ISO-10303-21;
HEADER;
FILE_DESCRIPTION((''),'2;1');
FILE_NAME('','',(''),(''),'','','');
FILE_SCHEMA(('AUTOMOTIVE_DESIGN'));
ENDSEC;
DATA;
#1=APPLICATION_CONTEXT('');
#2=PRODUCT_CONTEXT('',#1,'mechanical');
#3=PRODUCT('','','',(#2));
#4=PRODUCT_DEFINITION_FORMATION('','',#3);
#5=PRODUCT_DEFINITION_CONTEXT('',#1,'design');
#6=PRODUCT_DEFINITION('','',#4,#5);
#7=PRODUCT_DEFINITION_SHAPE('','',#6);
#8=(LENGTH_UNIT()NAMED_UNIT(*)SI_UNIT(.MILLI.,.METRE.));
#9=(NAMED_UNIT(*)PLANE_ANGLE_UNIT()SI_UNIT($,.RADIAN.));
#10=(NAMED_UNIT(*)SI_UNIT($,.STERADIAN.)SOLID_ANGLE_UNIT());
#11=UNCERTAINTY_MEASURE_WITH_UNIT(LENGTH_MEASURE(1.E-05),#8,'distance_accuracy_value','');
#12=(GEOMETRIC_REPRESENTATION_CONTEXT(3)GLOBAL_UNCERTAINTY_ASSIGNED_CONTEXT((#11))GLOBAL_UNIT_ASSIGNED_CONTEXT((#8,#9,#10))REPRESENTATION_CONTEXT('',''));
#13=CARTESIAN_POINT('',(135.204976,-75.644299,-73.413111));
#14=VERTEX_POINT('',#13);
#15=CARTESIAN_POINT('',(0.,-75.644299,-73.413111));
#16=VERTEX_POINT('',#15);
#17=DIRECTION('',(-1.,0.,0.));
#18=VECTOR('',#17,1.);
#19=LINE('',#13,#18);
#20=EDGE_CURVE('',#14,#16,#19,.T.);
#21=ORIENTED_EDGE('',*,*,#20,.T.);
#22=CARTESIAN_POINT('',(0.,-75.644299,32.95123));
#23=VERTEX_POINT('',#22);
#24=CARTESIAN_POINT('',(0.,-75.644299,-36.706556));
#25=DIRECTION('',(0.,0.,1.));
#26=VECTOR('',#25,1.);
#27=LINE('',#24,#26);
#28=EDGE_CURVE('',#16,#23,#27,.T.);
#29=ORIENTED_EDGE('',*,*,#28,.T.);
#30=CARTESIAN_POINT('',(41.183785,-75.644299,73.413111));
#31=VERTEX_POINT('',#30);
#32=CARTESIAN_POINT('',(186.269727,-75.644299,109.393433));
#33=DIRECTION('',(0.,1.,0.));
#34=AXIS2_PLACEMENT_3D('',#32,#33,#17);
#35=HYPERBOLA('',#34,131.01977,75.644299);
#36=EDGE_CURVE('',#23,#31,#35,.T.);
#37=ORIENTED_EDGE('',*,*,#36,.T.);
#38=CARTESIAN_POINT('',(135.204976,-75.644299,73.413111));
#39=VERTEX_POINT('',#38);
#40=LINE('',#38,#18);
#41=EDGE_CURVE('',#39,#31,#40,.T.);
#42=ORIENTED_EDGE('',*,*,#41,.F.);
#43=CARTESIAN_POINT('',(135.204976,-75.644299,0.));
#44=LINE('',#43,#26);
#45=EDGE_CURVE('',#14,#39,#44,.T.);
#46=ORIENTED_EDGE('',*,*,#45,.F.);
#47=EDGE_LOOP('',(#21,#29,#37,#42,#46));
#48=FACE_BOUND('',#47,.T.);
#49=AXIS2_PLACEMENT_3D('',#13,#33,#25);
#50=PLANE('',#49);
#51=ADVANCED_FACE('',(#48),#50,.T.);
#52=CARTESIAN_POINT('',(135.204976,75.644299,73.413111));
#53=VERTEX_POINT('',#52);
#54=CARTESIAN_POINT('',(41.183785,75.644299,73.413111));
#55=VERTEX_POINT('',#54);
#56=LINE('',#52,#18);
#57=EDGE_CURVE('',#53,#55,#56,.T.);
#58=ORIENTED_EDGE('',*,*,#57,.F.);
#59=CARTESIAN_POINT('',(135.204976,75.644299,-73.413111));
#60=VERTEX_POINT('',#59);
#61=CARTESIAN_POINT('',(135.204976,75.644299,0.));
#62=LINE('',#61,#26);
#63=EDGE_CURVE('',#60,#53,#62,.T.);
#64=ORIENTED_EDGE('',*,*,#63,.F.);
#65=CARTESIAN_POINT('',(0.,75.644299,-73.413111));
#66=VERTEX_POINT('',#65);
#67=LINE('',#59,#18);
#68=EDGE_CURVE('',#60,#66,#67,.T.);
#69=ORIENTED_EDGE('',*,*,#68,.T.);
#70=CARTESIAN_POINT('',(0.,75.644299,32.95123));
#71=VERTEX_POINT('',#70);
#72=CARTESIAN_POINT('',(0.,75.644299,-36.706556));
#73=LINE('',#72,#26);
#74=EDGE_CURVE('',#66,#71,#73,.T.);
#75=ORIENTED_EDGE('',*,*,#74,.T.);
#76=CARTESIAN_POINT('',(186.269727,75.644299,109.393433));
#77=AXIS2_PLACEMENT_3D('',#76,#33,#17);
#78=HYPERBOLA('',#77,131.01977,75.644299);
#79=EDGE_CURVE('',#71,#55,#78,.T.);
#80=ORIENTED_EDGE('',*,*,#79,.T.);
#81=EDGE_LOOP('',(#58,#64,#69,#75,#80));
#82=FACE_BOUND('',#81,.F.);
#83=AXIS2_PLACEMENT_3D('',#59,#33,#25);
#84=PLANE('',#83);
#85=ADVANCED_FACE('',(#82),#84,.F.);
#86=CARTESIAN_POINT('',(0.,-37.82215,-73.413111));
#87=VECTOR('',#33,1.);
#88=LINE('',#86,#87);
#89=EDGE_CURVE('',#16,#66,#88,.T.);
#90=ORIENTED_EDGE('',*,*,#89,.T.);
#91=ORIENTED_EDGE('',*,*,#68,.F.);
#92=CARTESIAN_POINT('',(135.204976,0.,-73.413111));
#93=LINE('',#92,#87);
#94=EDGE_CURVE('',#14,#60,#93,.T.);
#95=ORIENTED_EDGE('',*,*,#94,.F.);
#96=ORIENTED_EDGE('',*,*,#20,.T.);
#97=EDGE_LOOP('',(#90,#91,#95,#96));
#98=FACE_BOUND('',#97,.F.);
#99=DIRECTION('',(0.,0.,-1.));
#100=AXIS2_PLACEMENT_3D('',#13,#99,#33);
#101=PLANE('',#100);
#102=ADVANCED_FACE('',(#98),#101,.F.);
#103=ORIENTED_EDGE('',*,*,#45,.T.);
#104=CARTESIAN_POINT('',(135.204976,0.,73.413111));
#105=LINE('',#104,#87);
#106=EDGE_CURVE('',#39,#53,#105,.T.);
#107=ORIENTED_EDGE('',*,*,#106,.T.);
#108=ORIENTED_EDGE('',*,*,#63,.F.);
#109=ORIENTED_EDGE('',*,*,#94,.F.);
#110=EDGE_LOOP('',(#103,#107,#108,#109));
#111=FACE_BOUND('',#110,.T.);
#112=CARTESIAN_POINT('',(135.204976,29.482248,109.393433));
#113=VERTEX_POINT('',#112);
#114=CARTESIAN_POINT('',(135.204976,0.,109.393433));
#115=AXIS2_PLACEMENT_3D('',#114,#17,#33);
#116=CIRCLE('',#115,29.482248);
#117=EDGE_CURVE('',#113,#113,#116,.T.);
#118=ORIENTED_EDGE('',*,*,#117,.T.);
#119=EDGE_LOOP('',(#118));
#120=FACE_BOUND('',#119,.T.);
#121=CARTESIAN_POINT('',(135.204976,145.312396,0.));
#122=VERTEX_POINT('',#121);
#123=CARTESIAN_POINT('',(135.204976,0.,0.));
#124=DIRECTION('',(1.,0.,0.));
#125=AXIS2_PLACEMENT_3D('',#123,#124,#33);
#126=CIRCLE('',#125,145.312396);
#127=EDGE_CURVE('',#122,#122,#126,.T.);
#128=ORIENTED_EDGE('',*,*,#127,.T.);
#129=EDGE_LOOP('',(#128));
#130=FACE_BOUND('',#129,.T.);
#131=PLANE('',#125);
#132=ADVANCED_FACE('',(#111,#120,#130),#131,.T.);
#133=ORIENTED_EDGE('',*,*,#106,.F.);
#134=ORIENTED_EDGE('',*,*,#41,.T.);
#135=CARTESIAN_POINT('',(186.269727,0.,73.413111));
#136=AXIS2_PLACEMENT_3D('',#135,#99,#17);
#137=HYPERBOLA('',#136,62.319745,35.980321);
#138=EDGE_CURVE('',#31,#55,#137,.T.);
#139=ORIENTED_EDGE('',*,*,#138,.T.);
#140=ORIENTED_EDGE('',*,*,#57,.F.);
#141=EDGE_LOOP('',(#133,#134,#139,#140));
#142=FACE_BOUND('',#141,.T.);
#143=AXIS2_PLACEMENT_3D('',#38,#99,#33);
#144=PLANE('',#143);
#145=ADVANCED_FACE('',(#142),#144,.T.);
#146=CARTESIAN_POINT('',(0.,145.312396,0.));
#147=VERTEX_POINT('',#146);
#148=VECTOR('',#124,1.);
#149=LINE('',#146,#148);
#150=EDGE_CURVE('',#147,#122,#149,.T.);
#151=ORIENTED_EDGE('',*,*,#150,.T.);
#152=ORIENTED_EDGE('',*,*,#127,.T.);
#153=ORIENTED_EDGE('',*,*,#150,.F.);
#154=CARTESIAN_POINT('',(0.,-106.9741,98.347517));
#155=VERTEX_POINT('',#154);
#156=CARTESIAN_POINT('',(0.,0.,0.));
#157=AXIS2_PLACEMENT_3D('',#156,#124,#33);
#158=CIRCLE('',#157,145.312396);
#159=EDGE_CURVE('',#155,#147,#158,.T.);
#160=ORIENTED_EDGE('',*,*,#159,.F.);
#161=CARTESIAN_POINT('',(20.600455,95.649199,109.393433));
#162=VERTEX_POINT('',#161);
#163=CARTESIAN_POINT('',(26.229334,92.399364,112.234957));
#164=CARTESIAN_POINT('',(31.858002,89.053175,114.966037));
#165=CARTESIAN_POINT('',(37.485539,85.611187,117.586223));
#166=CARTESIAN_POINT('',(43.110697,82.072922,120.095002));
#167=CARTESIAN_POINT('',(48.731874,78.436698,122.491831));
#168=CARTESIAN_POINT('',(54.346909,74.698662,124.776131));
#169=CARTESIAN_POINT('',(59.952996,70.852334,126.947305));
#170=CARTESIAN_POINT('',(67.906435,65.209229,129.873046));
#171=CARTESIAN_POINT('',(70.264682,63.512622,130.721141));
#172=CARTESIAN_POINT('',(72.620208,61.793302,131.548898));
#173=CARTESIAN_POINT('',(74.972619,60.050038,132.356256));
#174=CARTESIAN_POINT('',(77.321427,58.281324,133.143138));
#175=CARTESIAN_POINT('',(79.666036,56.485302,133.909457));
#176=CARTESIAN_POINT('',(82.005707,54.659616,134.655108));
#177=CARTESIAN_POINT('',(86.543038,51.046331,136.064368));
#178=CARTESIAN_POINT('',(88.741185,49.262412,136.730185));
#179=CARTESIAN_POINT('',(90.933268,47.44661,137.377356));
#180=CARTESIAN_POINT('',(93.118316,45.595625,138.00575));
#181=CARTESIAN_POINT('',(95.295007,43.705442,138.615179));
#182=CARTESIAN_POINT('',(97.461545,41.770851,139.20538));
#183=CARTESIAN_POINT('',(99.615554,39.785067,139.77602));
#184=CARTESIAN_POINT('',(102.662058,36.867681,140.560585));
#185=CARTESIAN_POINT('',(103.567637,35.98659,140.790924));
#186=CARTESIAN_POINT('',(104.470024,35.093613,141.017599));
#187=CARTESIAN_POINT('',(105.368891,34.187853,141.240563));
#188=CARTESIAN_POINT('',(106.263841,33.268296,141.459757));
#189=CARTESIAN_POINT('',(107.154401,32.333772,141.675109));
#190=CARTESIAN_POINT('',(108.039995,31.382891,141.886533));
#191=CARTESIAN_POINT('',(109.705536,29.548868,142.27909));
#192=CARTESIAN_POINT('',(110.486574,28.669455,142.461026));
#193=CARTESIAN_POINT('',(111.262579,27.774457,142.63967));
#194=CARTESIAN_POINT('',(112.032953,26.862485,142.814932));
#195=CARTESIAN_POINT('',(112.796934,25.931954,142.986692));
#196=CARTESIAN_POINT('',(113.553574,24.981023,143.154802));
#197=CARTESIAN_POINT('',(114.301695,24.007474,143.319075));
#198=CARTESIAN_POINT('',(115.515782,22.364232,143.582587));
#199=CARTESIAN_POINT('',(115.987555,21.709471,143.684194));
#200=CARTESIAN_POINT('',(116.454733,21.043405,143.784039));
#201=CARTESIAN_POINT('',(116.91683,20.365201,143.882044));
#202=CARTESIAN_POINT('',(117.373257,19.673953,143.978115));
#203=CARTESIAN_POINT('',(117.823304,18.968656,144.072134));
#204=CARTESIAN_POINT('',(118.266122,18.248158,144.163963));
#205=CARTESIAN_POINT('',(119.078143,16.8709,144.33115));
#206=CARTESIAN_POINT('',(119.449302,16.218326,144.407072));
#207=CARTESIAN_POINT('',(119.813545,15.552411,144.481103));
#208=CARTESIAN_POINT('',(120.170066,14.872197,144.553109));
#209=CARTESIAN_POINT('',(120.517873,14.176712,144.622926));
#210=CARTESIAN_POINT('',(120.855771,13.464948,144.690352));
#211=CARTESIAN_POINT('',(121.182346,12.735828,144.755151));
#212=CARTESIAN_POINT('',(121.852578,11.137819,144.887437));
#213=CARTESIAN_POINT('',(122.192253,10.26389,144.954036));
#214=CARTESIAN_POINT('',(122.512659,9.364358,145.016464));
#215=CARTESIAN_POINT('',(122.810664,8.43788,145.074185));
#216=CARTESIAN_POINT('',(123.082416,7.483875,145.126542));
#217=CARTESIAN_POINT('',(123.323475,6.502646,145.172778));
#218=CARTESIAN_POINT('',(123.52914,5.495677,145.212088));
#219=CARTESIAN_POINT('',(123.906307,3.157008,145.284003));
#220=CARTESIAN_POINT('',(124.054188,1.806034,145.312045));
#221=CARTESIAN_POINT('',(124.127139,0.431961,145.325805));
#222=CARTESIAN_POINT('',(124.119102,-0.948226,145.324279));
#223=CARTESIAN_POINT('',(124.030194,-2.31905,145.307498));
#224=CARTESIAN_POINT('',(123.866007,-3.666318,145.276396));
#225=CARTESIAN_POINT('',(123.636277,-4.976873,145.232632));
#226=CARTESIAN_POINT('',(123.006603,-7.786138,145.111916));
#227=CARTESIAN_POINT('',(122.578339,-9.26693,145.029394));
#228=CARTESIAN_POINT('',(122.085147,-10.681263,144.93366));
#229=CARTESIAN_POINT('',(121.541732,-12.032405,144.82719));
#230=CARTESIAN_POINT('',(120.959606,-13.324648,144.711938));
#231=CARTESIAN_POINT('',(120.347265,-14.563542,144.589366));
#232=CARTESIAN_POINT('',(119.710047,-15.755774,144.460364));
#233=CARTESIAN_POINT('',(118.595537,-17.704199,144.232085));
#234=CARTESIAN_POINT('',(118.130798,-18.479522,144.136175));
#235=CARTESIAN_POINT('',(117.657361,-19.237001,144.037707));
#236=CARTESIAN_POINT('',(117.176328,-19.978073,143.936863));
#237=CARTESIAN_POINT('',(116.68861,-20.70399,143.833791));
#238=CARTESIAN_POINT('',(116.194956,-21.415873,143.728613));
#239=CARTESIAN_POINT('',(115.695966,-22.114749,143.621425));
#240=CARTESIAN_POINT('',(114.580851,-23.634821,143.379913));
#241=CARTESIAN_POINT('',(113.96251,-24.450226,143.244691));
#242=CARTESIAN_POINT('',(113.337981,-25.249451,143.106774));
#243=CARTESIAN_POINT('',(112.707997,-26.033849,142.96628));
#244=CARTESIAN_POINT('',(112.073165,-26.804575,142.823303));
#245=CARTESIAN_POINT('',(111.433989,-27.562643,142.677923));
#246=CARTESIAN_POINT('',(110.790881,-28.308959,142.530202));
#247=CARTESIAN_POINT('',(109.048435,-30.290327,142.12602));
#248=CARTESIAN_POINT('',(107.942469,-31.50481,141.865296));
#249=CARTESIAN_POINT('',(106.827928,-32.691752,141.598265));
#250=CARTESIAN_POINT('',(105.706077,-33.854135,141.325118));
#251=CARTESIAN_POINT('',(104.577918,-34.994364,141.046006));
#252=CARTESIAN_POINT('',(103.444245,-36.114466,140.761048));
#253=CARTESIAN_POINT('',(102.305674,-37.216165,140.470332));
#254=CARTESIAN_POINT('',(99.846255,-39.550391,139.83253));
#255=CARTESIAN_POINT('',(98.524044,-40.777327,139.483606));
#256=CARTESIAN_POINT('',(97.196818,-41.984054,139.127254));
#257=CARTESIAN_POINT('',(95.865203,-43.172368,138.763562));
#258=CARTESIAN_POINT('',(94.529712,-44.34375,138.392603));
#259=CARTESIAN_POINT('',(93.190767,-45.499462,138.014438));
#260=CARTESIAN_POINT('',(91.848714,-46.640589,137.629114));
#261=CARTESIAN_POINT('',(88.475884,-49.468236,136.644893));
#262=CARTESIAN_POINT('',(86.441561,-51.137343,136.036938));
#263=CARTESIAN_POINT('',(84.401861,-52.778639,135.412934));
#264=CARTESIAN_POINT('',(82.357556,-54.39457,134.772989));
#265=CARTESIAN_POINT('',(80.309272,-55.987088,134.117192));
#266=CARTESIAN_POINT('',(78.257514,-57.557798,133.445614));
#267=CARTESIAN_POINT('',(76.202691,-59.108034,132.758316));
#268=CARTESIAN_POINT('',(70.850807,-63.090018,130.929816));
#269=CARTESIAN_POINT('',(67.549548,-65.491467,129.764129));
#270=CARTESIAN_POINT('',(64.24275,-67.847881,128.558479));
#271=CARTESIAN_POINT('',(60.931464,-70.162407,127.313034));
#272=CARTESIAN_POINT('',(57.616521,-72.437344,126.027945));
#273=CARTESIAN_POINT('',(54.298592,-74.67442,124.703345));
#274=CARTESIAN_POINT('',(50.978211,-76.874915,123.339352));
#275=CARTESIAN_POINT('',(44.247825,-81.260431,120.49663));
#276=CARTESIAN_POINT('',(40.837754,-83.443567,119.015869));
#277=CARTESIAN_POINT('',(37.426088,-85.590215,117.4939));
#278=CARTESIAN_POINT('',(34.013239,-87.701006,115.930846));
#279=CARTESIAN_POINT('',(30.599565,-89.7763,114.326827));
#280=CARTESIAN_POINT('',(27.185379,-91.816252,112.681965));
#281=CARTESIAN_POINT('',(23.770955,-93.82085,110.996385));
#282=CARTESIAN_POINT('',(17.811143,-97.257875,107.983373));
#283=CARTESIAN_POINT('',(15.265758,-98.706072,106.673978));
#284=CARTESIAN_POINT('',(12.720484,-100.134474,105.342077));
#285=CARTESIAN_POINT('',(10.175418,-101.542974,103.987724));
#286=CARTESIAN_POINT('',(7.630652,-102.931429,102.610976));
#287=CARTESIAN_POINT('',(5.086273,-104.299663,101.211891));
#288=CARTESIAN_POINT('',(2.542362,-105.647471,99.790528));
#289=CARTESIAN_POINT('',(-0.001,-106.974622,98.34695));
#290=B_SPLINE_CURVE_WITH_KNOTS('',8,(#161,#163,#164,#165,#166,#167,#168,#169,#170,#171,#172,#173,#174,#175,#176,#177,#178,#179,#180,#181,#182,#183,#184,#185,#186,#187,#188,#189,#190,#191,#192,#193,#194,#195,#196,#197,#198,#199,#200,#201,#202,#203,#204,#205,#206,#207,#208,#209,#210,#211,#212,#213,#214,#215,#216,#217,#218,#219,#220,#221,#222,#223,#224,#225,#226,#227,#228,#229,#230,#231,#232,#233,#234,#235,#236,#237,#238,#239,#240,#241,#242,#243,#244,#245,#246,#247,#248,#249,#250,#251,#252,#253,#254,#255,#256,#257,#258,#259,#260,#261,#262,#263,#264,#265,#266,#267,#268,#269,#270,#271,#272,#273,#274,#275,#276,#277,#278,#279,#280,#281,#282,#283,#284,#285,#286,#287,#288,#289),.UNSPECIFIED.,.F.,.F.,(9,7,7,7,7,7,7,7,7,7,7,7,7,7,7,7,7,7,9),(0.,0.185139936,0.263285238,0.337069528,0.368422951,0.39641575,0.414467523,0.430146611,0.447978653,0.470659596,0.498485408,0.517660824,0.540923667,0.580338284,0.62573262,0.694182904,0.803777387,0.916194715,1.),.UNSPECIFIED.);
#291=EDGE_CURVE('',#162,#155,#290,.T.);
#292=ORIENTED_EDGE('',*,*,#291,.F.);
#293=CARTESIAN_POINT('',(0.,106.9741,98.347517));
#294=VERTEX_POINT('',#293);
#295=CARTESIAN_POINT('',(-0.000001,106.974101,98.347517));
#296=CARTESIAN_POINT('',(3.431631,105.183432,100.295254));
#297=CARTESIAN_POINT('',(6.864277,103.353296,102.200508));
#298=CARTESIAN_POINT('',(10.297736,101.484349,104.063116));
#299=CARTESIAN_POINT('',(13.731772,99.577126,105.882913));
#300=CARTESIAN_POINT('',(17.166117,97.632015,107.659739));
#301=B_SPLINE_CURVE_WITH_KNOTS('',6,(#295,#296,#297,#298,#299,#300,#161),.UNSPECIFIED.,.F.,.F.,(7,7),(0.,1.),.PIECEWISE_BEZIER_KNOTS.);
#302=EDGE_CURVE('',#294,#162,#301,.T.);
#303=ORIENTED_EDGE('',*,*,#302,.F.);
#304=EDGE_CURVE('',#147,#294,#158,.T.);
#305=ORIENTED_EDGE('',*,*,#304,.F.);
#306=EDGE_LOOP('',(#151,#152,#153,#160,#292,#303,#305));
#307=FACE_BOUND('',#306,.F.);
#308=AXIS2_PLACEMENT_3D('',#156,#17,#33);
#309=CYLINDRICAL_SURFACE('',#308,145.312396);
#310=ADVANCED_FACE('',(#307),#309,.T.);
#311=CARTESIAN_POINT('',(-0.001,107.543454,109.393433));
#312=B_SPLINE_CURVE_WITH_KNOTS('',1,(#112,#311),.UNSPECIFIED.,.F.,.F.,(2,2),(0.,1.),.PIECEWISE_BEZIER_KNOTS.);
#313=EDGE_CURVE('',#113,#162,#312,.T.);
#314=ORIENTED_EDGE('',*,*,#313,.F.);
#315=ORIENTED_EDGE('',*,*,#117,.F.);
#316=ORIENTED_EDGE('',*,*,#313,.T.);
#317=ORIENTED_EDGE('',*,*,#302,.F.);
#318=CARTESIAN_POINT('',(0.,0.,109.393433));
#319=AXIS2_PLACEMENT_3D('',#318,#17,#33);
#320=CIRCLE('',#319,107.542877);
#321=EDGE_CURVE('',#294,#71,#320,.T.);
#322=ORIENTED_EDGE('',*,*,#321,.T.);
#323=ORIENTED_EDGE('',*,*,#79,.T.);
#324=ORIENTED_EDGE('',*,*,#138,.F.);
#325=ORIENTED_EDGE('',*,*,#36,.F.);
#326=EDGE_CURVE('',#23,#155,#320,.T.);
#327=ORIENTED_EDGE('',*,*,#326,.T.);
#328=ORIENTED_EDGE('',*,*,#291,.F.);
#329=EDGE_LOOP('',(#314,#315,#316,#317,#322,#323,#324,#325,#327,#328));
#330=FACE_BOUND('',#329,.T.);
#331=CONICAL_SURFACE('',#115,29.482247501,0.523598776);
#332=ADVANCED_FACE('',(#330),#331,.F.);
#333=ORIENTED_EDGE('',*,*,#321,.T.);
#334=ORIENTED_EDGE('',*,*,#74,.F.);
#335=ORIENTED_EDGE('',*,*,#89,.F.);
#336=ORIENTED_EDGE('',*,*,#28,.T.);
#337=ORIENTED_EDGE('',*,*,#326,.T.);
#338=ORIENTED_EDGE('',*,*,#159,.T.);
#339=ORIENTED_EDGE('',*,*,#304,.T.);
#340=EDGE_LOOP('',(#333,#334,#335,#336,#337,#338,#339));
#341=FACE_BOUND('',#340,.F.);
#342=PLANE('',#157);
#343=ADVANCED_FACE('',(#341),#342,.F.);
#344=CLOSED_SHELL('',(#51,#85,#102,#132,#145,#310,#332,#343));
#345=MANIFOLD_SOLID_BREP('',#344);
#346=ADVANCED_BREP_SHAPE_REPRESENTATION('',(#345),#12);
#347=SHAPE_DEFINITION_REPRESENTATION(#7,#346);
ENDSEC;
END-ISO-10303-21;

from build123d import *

# Parameters (mm, degrees)
F1_DEPTH = 67.31
F3_DEPTH = 91.186
F4_R     = 145.3123956035
F5_DEPTH = 135.2049764246
F6_W     = 151.2885987759
F6_H     = 146.8262225389
F7_DEPTH = 219.4037679583
F8_R     = 29.4822475013
F9_DEPTH = 135.2059764246
F9_TAPER = -30


# Not quite as in the source:
# - a feature of the source that left no trace in its solid (it failed there, or was rolled back) is left out


with BuildPart() as f1:
    # F0 (on Top) → F1 (new body)
    with BuildSketch(Plane.XY):
        Polygon((45.1956306257, 12.500264471), (26.5868465743, 38.6269495137), (-4.4622184691, 46.6796555882), (-33.4233618988, 32.8904320264), (-46.7453428367, 3.711409783), (-38.1946583448, -27.2042223456), (-11.7722687269, -45.3906964974), (20.1584962624, -42.3383592967), (42.6568768139, -19.4754332426), align=None)
    extrude(amount=F1_DEPTH)

    # F2 (on face) → F3 (cut)
    with BuildSketch(Plane.XY.offset(67.31)):
        Polygon((13.3602926508, -6.4339778404), (13.3602926508, 6.4339778404), (3.2997197844, 14.4570169783), (-9.2456093816, 11.593627462), (-14.8288061072, 0), (-9.2456093816, -11.593627462), (3.2997197844, -14.4570169783), align=None)
    extrude(amount=-F3_DEPTH, mode=Mode.SUBTRACT)

    # F4 (on Right) → F5 (join)
    with BuildSketch(Plane.YZ):
        Circle(F4_R)
    extrude(amount=F5_DEPTH)

    # F6 (on face) → F7 (cut)
    with BuildSketch(Plane.YZ.offset(135.2049764246)):
        Rectangle(F6_W, F6_H)
    extrude(amount=-F7_DEPTH, mode=Mode.SUBTRACT)

    # F8 (on face) → F9 (cut, through all)
    with BuildSketch(Plane.YZ.offset(135.2049764246)):
        with Locations((0, 109.3934327364)):
            Circle(F8_R)
    extrude(amount=-F9_DEPTH, taper=F9_TAPER, mode=Mode.SUBTRACT)


solid = f1.part
